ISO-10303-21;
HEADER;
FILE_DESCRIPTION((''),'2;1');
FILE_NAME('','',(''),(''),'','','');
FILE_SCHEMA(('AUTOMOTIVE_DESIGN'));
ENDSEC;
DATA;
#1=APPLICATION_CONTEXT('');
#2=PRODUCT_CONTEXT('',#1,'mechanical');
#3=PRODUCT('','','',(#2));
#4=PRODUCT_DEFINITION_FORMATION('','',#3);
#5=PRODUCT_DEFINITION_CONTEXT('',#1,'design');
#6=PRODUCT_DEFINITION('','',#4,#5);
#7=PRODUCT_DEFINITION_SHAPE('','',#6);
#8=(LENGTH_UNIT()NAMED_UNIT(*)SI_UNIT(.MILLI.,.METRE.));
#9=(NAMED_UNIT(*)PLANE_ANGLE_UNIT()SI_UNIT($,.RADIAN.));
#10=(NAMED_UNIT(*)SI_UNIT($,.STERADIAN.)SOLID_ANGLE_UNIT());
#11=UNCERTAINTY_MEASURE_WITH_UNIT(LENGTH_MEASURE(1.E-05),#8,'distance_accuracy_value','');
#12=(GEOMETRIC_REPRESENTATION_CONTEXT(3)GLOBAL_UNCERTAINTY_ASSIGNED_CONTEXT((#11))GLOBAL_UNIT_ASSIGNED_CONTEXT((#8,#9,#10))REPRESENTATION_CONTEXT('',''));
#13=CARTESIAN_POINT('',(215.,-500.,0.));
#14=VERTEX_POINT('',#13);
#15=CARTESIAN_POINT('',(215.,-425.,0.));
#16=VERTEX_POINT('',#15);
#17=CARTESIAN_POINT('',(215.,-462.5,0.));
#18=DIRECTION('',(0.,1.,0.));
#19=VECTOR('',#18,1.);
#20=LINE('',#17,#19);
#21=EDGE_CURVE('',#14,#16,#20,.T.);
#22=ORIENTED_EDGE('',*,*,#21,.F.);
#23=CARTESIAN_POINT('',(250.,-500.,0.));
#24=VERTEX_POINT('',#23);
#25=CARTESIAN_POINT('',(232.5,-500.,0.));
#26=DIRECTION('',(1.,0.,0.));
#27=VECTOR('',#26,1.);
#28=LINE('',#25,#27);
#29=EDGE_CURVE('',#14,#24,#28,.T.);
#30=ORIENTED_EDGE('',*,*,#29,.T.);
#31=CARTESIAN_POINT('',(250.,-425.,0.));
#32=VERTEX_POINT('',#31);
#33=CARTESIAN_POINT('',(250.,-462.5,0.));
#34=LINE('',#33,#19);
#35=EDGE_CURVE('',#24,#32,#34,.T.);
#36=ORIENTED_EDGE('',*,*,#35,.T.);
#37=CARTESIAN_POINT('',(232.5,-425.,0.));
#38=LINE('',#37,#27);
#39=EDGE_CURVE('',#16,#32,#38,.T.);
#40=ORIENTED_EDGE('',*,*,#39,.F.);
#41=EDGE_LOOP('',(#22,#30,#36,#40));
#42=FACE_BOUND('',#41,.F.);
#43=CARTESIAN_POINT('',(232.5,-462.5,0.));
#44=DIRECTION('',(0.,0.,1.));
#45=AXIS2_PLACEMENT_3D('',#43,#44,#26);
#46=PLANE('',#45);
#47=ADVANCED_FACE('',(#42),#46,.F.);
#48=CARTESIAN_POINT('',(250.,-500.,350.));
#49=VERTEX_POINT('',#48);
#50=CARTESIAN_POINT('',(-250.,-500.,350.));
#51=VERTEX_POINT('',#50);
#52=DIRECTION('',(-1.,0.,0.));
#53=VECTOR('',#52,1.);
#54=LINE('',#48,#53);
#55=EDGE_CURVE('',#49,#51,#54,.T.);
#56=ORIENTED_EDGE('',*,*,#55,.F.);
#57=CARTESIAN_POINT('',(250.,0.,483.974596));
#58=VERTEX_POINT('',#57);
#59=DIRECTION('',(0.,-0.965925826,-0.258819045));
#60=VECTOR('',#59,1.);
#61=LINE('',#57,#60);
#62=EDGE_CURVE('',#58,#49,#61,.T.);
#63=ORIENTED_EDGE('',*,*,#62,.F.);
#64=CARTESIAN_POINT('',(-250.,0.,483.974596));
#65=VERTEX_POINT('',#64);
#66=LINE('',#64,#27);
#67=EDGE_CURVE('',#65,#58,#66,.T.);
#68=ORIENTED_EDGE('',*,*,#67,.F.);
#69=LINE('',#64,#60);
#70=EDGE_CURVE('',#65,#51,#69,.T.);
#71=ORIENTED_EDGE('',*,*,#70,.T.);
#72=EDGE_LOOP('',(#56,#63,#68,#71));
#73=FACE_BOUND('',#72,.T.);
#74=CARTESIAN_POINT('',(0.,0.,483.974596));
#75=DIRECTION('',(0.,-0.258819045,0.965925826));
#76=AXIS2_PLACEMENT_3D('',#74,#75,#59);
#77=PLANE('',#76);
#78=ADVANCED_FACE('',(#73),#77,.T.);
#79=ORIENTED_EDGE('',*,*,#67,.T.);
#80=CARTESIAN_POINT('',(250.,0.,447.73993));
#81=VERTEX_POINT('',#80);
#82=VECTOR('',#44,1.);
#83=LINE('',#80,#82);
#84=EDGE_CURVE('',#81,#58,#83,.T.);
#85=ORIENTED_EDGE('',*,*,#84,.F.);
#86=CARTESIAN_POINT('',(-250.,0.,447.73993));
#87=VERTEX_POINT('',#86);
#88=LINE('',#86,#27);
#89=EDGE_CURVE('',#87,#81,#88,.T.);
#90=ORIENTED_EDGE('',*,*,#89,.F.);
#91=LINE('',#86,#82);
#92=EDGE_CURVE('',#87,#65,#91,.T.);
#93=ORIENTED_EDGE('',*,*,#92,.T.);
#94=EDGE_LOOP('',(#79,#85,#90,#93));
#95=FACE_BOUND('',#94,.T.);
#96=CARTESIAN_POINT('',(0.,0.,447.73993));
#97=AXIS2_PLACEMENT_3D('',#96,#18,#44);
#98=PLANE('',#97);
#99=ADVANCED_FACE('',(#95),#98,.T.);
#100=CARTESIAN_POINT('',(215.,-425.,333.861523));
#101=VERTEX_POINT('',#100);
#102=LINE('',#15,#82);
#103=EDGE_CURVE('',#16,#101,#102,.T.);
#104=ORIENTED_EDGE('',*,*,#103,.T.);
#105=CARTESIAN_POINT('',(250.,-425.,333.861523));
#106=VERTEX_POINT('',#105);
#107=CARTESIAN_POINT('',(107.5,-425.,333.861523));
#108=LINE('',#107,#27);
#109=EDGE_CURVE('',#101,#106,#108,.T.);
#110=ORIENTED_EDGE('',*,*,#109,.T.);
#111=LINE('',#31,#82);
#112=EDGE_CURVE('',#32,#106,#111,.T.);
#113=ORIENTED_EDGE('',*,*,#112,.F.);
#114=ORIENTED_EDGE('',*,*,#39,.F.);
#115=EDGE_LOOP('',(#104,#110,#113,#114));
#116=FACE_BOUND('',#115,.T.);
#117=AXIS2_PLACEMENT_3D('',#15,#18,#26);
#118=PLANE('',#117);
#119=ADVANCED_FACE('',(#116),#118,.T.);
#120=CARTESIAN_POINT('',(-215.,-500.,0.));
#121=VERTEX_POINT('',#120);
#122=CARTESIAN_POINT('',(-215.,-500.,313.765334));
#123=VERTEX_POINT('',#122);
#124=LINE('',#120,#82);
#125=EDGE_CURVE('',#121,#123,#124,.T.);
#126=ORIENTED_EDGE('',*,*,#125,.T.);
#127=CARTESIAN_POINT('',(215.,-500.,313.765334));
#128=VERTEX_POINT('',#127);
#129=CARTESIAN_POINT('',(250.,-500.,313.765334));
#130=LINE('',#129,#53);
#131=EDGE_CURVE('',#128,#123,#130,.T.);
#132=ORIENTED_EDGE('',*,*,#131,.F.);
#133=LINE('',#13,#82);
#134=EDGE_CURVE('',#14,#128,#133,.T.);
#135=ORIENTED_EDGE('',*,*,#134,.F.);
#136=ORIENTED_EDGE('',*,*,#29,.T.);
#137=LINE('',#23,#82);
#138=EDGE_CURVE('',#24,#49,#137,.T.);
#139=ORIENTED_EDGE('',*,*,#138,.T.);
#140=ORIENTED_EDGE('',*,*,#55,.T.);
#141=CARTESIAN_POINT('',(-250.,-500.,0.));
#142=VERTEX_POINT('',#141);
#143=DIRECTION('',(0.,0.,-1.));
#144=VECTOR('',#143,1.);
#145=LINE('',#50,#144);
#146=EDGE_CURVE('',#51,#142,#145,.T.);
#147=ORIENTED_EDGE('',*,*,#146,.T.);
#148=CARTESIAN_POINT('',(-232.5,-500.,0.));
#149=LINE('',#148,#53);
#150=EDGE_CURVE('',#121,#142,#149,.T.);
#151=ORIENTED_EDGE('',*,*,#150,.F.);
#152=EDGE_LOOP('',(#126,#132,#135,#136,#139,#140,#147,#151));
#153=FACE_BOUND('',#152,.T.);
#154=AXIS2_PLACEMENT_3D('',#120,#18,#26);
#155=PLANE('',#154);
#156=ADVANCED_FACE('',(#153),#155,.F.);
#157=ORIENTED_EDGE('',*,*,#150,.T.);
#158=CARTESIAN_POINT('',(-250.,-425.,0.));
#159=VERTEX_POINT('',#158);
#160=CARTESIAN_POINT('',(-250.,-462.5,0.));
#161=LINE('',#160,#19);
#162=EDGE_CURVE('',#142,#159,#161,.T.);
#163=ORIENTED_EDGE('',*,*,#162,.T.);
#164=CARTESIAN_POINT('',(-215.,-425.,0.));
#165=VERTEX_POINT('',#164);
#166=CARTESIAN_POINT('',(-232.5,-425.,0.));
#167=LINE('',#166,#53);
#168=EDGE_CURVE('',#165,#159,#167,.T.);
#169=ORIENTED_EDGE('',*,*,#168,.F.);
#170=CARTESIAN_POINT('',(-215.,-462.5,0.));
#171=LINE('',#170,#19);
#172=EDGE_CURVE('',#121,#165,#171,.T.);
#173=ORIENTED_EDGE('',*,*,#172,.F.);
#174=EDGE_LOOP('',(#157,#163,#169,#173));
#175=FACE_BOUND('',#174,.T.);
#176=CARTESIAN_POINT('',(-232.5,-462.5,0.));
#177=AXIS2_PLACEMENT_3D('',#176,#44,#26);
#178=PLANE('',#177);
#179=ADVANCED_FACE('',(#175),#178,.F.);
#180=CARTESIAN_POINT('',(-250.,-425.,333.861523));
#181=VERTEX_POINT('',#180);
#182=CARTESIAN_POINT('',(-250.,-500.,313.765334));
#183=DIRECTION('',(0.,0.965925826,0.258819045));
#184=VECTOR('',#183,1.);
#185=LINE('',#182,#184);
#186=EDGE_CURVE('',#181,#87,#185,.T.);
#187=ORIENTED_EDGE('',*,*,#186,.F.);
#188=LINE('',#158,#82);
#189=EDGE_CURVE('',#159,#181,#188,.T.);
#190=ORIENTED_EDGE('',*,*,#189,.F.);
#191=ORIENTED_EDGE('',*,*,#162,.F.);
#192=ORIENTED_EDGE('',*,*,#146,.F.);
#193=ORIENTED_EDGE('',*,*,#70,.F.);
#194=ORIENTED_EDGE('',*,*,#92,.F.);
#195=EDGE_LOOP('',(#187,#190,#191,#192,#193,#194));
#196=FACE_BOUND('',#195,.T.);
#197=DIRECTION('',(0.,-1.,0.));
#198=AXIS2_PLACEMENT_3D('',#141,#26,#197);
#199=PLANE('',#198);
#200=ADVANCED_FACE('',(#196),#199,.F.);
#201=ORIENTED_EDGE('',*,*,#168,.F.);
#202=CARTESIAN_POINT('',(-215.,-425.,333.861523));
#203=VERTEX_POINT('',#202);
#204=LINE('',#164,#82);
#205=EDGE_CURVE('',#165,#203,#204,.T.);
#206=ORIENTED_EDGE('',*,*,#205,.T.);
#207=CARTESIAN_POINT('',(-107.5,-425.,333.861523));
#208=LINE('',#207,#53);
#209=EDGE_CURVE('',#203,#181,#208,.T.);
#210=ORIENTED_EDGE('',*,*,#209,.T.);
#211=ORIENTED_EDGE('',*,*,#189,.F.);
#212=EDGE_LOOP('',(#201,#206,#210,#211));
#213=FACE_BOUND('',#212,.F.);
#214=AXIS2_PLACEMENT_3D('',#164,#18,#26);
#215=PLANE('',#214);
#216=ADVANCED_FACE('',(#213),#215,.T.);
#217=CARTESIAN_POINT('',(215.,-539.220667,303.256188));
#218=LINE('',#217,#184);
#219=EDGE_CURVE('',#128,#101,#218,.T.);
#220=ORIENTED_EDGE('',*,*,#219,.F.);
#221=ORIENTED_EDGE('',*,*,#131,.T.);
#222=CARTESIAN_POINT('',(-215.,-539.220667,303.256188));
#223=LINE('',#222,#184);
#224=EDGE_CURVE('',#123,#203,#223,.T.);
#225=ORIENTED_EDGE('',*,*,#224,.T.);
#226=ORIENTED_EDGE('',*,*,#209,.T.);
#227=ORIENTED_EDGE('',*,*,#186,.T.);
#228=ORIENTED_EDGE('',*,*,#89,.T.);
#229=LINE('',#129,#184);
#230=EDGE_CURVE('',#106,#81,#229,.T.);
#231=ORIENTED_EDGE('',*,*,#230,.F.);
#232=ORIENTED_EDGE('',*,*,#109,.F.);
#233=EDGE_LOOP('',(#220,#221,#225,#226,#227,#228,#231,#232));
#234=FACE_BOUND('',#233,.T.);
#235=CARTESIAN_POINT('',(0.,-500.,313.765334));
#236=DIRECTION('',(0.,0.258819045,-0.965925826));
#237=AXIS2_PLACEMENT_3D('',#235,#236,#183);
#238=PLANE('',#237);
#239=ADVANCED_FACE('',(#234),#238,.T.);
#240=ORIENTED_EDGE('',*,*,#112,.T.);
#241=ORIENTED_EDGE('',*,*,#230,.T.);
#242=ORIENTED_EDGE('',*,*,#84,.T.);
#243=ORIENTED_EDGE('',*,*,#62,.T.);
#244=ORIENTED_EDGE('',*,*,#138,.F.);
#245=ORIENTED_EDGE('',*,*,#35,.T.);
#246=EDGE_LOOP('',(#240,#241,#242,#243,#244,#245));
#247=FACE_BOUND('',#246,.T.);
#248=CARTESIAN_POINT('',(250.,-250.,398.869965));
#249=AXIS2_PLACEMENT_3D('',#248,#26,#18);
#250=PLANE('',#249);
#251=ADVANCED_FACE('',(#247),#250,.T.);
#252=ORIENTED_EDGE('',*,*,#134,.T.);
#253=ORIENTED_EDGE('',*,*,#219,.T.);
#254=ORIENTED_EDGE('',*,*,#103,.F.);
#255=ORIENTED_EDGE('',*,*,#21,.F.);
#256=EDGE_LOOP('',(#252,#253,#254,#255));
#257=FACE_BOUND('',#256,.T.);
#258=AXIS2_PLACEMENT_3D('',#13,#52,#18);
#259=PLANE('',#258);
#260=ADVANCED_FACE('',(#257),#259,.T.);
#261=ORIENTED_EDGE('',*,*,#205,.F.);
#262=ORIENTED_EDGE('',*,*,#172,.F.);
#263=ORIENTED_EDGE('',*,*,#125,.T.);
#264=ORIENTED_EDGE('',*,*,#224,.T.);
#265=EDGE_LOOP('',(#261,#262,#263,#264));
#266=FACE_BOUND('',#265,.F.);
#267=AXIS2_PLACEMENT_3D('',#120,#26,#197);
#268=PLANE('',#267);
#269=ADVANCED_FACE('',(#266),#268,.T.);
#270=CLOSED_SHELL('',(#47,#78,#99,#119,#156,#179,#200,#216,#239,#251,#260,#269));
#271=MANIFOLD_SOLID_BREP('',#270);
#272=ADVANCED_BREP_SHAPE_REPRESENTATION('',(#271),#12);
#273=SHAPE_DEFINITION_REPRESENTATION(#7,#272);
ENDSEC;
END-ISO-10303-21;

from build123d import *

# Parameters (mm, degrees)
F3_DEPTH = 250
F4_W     = 35
F4_H     = 75


# Not quite as in the source:
# - a pattern or mirror of a feature is missing from the dataset's text; its kind, count and spacing are read off the source's solid
# - the program builds the solid bodies; features that only make, move or delete a surface that nothing else refers to are left out


with BuildPart() as f3:
    # F2 (on Right) → F3 (new body, symmetric)
    with BuildSketch(Plane.YZ):
        Polygon((-500, 313.7653336856), (0, 447.7399299012), (0, 483.9745962156), (-500, 350), align=None)
    extrude(amount=F3_DEPTH, both=True)

    # F4 (on Top) → F5 (join, up to the next surface of F3)
    with BuildSketch(Plane.XY):
        with Locations((232.5, -462.5)):
            Rectangle(F4_W, F4_H)
    f5 = extrude(until=Until.NEXT)

    # F5_copies: F5 across plane
    add(f5.mirror(Plane(origin=(0, 0, 0), x_dir=(0, 0, -1), z_dir=(-1, 0, 0))))


solid = f3.part
